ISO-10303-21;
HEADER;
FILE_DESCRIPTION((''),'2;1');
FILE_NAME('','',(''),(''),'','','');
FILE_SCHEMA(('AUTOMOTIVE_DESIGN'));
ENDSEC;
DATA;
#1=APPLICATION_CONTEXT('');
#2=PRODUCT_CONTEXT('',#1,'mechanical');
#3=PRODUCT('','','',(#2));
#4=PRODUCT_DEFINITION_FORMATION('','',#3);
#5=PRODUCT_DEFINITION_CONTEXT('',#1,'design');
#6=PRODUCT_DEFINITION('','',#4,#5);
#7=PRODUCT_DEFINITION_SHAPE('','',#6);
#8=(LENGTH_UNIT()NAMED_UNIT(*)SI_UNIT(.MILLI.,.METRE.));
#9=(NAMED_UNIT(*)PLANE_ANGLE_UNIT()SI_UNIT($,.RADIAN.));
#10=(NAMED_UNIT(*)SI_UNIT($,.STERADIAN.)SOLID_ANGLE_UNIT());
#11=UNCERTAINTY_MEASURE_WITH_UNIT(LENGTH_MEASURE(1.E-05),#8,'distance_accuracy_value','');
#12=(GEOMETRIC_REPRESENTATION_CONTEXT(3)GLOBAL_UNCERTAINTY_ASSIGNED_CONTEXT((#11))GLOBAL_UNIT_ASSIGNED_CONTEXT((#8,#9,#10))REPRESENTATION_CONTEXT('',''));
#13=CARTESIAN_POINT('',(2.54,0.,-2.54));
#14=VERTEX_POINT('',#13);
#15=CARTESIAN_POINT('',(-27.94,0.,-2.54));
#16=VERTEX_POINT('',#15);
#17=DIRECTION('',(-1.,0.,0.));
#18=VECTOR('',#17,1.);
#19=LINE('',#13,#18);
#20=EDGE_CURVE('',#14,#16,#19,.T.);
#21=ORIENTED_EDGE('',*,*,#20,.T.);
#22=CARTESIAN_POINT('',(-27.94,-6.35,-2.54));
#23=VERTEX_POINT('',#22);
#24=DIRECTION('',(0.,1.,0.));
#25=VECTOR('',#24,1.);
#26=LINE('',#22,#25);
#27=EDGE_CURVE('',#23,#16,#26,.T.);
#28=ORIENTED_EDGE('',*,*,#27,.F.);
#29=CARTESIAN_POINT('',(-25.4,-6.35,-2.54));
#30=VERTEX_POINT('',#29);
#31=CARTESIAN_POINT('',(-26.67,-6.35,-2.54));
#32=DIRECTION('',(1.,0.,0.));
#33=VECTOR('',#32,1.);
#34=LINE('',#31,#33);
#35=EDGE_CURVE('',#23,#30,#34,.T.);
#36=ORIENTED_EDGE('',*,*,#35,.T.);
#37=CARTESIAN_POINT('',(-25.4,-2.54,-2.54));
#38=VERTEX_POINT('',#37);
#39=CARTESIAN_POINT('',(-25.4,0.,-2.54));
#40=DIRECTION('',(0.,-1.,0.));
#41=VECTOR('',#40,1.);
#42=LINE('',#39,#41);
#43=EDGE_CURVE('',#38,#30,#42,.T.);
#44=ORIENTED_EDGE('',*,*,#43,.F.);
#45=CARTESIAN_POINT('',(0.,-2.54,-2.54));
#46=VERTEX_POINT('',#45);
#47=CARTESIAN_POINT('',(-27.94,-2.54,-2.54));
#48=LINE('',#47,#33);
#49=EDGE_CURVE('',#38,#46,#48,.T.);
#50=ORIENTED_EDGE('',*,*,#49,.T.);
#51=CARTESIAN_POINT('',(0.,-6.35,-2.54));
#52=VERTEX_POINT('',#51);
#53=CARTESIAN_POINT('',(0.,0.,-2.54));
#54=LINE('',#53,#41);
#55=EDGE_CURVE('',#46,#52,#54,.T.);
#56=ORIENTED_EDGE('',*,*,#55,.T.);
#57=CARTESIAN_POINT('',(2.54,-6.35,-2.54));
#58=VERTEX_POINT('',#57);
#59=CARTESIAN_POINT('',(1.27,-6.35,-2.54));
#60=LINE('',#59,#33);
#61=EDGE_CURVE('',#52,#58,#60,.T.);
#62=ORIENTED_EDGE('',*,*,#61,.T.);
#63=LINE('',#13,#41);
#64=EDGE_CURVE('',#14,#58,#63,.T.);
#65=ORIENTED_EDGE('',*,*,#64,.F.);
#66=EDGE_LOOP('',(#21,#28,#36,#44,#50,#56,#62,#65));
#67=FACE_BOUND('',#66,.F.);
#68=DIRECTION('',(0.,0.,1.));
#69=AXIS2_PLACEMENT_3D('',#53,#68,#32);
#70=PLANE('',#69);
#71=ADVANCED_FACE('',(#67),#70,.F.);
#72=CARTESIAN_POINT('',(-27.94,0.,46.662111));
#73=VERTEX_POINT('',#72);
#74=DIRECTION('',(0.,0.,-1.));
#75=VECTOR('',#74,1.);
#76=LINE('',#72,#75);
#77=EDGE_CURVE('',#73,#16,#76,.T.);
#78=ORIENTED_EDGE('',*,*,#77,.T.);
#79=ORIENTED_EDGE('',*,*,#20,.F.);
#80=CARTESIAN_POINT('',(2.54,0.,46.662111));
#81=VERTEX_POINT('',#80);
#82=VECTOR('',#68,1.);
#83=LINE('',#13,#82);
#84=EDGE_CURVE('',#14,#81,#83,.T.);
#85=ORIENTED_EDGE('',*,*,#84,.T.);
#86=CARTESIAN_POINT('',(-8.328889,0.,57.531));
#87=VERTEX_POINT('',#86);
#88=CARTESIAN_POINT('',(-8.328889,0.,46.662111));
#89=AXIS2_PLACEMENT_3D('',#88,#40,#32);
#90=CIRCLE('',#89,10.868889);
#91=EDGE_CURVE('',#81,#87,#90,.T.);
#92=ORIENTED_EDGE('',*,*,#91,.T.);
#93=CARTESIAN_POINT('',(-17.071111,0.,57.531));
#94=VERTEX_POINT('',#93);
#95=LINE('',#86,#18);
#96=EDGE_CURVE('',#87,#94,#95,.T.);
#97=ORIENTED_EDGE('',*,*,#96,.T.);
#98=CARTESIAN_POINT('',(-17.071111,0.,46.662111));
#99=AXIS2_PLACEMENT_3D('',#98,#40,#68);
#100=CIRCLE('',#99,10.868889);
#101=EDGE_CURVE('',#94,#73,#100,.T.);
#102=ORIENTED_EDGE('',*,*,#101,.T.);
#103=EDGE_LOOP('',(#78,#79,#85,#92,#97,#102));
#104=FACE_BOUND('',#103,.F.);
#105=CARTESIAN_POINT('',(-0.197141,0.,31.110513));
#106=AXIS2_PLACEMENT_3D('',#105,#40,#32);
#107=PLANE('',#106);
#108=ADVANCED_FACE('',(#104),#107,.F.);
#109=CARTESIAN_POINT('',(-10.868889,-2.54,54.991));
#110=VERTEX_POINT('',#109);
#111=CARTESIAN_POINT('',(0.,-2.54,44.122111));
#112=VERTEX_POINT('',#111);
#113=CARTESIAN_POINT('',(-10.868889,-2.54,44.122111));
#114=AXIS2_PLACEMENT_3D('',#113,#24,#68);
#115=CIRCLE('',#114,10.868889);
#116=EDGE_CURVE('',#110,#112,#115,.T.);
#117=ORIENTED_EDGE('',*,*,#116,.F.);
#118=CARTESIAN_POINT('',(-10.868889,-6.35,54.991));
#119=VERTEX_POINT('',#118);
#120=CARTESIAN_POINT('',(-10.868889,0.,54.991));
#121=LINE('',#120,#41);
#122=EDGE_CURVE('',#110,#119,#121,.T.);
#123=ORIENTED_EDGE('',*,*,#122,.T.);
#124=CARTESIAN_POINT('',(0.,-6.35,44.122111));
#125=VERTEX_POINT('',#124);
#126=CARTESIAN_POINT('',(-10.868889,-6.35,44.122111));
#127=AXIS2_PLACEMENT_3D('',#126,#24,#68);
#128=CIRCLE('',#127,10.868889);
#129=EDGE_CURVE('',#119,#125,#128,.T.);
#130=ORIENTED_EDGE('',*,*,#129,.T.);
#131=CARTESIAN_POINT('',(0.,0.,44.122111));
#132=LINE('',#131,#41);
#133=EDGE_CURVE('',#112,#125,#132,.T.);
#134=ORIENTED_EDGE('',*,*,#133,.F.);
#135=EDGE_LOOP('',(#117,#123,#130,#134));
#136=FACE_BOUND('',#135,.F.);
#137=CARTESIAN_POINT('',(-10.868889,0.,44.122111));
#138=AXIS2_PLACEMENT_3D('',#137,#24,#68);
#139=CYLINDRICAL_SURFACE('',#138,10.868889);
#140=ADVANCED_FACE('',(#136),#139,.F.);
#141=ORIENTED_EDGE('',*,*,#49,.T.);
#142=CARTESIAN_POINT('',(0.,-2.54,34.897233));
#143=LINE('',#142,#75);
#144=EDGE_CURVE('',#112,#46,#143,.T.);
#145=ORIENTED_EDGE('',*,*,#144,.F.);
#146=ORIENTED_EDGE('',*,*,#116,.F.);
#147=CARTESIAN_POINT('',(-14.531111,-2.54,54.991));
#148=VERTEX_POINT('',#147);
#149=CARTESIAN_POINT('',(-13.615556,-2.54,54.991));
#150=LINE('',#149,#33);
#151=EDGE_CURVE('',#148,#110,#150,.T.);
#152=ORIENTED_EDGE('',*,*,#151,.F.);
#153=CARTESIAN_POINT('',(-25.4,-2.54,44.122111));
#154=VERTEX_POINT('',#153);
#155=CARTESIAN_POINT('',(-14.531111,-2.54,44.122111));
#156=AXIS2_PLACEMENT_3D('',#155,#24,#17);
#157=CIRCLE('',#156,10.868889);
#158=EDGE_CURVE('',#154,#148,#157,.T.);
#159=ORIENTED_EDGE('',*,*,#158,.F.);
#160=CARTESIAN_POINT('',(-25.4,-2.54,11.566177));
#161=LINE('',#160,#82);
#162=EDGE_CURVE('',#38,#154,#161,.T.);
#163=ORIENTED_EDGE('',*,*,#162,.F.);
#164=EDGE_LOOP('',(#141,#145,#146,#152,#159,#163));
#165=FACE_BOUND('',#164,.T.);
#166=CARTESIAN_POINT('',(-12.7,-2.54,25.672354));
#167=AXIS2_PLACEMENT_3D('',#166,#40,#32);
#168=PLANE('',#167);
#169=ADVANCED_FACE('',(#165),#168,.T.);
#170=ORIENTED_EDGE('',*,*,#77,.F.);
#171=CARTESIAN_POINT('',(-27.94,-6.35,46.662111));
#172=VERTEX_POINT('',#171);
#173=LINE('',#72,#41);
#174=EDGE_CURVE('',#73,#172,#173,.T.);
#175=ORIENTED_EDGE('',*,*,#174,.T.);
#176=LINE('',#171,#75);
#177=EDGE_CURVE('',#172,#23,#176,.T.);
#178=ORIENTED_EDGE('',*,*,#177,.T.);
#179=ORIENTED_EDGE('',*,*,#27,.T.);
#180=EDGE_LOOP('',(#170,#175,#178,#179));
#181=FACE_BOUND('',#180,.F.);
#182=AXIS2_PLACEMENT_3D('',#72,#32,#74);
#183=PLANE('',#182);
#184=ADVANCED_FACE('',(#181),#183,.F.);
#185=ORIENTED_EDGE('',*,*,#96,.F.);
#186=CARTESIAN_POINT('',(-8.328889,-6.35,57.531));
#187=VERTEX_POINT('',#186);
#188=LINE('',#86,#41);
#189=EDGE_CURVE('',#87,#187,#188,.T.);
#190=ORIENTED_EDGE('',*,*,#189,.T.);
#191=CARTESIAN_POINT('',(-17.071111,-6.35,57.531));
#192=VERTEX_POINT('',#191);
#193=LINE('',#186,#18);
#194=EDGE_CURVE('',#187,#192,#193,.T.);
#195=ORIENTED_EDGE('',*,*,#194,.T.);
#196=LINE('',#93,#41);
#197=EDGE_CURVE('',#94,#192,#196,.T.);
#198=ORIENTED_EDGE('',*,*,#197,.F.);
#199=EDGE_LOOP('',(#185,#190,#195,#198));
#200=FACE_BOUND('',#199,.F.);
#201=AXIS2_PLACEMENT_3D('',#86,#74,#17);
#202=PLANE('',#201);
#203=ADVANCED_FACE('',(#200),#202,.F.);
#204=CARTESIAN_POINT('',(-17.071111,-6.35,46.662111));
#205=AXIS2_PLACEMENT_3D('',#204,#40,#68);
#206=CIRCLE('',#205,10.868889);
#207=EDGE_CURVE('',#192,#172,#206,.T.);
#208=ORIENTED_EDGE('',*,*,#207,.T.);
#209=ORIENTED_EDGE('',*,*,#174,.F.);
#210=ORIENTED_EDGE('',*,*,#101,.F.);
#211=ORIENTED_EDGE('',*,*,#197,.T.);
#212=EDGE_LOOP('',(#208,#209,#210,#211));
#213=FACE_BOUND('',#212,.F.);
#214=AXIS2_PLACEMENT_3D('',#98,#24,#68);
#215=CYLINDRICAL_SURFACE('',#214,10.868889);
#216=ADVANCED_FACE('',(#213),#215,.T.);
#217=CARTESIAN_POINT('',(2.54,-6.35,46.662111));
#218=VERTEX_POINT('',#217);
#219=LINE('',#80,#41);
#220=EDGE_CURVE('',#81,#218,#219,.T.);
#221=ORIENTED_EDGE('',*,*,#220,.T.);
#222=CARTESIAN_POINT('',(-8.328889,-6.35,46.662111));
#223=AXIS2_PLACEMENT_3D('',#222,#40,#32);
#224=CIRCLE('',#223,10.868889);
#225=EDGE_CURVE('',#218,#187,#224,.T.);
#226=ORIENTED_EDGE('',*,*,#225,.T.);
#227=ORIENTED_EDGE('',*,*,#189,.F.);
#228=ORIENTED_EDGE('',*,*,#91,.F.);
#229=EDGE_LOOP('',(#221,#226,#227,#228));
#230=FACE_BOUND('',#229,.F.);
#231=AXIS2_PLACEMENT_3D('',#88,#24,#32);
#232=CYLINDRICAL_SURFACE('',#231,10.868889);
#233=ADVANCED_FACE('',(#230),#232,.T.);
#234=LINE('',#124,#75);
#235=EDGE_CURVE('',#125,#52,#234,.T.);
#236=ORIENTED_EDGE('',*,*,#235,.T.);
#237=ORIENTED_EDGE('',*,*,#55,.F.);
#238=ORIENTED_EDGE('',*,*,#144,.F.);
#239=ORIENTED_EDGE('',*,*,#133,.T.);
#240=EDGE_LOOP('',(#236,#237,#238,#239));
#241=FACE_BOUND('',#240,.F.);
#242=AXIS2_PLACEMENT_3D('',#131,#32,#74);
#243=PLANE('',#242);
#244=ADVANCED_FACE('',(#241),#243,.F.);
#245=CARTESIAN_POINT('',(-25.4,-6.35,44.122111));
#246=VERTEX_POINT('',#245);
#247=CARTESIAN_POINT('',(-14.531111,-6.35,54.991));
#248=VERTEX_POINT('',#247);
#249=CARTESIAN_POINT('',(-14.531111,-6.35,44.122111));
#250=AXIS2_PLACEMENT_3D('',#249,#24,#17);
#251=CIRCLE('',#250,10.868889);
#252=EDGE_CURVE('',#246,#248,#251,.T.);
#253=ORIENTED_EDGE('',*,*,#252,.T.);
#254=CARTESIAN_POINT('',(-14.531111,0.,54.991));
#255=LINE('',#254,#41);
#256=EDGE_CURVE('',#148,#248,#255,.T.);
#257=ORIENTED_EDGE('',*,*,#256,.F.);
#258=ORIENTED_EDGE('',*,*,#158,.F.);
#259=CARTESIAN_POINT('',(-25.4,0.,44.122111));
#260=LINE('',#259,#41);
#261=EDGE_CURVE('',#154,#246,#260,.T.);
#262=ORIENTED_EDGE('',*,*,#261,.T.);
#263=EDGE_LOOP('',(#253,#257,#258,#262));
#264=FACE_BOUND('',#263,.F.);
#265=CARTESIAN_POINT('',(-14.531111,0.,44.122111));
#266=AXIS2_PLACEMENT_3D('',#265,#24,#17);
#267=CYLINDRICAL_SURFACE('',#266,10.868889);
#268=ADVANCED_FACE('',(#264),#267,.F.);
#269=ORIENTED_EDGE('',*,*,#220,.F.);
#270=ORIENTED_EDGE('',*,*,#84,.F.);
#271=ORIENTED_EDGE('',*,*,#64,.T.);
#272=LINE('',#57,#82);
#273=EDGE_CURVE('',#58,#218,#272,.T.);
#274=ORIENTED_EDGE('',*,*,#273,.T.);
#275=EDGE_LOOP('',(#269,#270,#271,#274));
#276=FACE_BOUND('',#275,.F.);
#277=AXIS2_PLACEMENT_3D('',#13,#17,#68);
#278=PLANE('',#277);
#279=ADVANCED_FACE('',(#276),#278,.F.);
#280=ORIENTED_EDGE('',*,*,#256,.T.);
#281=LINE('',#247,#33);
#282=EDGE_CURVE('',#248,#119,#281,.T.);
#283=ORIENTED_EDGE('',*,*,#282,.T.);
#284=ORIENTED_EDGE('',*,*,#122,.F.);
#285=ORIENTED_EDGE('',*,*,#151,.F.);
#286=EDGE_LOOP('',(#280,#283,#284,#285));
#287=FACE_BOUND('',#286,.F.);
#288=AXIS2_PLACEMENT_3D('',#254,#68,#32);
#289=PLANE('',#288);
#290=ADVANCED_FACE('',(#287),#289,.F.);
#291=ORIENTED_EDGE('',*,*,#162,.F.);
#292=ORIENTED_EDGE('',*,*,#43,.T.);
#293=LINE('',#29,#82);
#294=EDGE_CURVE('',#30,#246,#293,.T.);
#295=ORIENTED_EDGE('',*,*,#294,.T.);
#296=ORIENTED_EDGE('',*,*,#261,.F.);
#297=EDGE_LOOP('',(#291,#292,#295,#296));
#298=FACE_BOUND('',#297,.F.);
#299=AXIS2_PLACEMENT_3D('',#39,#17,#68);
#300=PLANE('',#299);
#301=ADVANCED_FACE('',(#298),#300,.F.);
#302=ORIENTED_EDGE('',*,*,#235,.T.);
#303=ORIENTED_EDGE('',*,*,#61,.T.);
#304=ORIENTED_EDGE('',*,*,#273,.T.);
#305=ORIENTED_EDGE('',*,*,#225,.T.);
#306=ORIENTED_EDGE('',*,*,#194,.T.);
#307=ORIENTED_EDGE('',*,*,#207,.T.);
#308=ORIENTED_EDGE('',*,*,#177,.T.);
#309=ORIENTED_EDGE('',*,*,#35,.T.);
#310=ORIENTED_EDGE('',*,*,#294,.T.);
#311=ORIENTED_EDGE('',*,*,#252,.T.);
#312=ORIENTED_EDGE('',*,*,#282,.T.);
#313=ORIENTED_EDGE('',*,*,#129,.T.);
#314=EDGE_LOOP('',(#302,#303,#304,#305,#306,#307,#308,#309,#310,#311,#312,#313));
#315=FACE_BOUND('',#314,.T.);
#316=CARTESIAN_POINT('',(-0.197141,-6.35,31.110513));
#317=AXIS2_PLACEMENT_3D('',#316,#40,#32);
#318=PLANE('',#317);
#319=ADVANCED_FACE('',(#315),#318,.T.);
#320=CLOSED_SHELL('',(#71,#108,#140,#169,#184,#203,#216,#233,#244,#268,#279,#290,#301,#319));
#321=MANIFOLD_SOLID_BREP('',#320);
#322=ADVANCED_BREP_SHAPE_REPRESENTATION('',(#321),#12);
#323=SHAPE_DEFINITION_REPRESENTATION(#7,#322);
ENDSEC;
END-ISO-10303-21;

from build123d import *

# Parameters (mm, degrees)
F0_W     = 2.54
F0_H     = 2.54
F1_DEPTH = 6.35
F3_DEPTH = 2.54


# Not quite as in the source:
# - a feature names something its author has since deleted; it is built from what else it names


with BuildPart() as f1:
    # F0 (on Front) → F1 (new body)
    with BuildSketch(Plane.XZ):
        with BuildLine():
            Line((-10.8688886, 57.531), (-10.8688886, 54.991))
            ThreePointArc((-10.8688886, 54.991), (-3.183423767, 51.807576233), (0, 44.1221114))
            Line((0, 44.1221114), (0, 0))
            Line((0, 0), (2.54, 0))
            Line((2.54, 0), (2.54, 46.6621114))
            ThreePointArc((2.54, 46.6621114), (-0.643423767, 54.347576233), (-8.3288886, 57.531))
            Line((-8.3288886, 57.531), (-10.8688886, 57.531))
        make_face()
        with BuildLine():
            Line((-14.5311114, 54.991), (-10.8688886, 54.991))
            Line((-10.8688886, 54.991), (-10.8688886, 57.531))
            Line((-10.8688886, 57.531), (-17.0711114, 57.531))
            ThreePointArc((-17.0711114, 57.531), (-24.756576233, 54.347576233), (-27.94, 46.6621114))
            Line((-27.94, 46.6621114), (-27.94, 0))
            Line((-27.94, 0), (-25.4, 0))
            Line((-25.4, 0), (-25.4, 44.1221114))
            ThreePointArc((-25.4, 44.1221114), (-22.216576233, 51.807576233), (-14.5311114, 54.991))
        make_face()
        with Locations((1.27, -1.27)):
            Rectangle(F0_W, F0_H)
        with Locations((-26.67, -1.27)):
            Rectangle(F0_W, F0_H)
    extrude(amount=F1_DEPTH)

    # F2 (on Front) → F3 (join)
    with BuildSketch(Plane.XZ):
        with BuildLine():
            Line((-27.94, -2.54), (0, -2.54))
            Line((0, -2.54), (2.54, -2.54))
            Line((2.54, -2.54), (2.54, 46.6621114))
            ThreePointArc((2.54, 46.6621114), (-0.643423767, 54.347576233), (-8.3288886, 57.531))
            Line((-8.3288886, 57.531), (-17.0711114, 57.531))
            ThreePointArc((-17.0711114, 57.531), (-24.756576233, 54.347576233), (-27.94, 46.6621114))
            Line((-27.94, 46.6621114), (-27.94, -2.54))
        make_face()
    extrude(amount=F3_DEPTH)


solid = f1.part
